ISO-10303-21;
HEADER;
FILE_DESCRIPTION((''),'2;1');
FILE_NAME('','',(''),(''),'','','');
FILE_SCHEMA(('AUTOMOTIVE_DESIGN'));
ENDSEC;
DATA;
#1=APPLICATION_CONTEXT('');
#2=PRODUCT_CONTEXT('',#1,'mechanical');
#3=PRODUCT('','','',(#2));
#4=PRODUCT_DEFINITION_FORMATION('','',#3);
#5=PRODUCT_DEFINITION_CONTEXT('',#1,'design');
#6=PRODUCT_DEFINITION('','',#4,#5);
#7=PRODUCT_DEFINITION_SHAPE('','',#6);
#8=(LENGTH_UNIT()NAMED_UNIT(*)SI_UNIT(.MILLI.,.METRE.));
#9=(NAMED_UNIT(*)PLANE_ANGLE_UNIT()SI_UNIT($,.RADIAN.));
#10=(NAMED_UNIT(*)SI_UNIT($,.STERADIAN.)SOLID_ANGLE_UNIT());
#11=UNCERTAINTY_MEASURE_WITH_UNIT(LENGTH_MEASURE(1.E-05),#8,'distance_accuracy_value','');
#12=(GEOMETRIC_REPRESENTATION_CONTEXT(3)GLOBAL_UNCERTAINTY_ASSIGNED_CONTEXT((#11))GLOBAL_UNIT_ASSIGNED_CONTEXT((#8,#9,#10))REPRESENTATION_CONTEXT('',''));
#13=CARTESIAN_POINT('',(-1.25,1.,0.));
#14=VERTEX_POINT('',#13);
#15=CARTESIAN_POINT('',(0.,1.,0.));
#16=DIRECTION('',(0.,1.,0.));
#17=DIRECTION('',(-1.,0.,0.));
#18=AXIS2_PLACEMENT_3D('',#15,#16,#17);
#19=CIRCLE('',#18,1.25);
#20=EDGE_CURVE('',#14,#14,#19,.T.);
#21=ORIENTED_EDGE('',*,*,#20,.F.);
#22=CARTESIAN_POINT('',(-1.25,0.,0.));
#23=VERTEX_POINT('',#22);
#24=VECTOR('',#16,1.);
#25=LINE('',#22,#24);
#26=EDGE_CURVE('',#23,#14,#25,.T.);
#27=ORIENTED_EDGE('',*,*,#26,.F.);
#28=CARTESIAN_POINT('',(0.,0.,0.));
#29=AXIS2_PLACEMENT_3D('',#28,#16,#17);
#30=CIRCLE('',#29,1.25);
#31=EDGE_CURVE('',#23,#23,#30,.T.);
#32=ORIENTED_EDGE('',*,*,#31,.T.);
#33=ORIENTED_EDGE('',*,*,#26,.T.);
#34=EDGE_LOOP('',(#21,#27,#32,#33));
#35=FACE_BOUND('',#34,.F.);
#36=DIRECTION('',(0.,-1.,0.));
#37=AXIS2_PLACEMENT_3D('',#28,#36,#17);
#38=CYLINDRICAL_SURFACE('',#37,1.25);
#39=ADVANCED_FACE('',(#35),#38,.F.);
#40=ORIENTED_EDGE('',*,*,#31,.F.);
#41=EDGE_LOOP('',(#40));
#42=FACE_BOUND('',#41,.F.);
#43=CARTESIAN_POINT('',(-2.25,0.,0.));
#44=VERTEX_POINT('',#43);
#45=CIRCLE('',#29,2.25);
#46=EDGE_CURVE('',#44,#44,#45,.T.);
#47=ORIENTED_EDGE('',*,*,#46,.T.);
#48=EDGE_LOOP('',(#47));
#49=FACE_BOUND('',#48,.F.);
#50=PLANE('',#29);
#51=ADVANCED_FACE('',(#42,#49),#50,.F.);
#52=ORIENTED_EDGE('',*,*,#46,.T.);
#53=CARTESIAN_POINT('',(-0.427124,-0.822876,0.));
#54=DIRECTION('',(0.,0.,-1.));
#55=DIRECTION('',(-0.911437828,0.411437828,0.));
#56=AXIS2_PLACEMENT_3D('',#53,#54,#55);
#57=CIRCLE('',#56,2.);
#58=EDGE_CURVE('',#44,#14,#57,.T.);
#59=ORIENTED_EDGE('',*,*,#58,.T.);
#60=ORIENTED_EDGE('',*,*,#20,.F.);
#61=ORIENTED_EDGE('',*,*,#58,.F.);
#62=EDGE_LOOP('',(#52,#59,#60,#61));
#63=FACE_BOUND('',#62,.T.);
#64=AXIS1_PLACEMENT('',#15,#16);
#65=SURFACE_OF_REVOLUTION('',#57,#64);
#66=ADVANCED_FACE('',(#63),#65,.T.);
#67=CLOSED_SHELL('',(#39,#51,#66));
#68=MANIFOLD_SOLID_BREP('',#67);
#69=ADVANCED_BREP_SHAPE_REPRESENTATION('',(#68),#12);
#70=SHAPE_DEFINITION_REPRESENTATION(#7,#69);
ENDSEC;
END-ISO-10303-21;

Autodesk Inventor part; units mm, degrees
ref_plane "YZ Plane" through (0, 0, 0) normal (1, 0, 0) x (0, 1, 0)
ref_plane "XZ Plane" through (0, 0, 0) normal (0, 1, 0) x (-1, 0, 0)
ref_plane "XY Plane" through (0, 0, 0) normal (0, 0, 1) x (1, 0, 0)
sketch "Sketch1" plane through (0, 0, 0) normal (0, 1, 0) x (-1, 0, 0)
  circle A0 centre (0, 0) radius 1.25
  circle A1 centre (0, 0) radius 2.25
  dimension "d0" = 2.5
  dimension "d1" = 4.5
extrude "Extrusion1" add sketch "Sketch1" along normal blind 1
fillet "Fillet1" radius 2 1 edges at (2.25, 1, 0)
properties material "Rubber"
